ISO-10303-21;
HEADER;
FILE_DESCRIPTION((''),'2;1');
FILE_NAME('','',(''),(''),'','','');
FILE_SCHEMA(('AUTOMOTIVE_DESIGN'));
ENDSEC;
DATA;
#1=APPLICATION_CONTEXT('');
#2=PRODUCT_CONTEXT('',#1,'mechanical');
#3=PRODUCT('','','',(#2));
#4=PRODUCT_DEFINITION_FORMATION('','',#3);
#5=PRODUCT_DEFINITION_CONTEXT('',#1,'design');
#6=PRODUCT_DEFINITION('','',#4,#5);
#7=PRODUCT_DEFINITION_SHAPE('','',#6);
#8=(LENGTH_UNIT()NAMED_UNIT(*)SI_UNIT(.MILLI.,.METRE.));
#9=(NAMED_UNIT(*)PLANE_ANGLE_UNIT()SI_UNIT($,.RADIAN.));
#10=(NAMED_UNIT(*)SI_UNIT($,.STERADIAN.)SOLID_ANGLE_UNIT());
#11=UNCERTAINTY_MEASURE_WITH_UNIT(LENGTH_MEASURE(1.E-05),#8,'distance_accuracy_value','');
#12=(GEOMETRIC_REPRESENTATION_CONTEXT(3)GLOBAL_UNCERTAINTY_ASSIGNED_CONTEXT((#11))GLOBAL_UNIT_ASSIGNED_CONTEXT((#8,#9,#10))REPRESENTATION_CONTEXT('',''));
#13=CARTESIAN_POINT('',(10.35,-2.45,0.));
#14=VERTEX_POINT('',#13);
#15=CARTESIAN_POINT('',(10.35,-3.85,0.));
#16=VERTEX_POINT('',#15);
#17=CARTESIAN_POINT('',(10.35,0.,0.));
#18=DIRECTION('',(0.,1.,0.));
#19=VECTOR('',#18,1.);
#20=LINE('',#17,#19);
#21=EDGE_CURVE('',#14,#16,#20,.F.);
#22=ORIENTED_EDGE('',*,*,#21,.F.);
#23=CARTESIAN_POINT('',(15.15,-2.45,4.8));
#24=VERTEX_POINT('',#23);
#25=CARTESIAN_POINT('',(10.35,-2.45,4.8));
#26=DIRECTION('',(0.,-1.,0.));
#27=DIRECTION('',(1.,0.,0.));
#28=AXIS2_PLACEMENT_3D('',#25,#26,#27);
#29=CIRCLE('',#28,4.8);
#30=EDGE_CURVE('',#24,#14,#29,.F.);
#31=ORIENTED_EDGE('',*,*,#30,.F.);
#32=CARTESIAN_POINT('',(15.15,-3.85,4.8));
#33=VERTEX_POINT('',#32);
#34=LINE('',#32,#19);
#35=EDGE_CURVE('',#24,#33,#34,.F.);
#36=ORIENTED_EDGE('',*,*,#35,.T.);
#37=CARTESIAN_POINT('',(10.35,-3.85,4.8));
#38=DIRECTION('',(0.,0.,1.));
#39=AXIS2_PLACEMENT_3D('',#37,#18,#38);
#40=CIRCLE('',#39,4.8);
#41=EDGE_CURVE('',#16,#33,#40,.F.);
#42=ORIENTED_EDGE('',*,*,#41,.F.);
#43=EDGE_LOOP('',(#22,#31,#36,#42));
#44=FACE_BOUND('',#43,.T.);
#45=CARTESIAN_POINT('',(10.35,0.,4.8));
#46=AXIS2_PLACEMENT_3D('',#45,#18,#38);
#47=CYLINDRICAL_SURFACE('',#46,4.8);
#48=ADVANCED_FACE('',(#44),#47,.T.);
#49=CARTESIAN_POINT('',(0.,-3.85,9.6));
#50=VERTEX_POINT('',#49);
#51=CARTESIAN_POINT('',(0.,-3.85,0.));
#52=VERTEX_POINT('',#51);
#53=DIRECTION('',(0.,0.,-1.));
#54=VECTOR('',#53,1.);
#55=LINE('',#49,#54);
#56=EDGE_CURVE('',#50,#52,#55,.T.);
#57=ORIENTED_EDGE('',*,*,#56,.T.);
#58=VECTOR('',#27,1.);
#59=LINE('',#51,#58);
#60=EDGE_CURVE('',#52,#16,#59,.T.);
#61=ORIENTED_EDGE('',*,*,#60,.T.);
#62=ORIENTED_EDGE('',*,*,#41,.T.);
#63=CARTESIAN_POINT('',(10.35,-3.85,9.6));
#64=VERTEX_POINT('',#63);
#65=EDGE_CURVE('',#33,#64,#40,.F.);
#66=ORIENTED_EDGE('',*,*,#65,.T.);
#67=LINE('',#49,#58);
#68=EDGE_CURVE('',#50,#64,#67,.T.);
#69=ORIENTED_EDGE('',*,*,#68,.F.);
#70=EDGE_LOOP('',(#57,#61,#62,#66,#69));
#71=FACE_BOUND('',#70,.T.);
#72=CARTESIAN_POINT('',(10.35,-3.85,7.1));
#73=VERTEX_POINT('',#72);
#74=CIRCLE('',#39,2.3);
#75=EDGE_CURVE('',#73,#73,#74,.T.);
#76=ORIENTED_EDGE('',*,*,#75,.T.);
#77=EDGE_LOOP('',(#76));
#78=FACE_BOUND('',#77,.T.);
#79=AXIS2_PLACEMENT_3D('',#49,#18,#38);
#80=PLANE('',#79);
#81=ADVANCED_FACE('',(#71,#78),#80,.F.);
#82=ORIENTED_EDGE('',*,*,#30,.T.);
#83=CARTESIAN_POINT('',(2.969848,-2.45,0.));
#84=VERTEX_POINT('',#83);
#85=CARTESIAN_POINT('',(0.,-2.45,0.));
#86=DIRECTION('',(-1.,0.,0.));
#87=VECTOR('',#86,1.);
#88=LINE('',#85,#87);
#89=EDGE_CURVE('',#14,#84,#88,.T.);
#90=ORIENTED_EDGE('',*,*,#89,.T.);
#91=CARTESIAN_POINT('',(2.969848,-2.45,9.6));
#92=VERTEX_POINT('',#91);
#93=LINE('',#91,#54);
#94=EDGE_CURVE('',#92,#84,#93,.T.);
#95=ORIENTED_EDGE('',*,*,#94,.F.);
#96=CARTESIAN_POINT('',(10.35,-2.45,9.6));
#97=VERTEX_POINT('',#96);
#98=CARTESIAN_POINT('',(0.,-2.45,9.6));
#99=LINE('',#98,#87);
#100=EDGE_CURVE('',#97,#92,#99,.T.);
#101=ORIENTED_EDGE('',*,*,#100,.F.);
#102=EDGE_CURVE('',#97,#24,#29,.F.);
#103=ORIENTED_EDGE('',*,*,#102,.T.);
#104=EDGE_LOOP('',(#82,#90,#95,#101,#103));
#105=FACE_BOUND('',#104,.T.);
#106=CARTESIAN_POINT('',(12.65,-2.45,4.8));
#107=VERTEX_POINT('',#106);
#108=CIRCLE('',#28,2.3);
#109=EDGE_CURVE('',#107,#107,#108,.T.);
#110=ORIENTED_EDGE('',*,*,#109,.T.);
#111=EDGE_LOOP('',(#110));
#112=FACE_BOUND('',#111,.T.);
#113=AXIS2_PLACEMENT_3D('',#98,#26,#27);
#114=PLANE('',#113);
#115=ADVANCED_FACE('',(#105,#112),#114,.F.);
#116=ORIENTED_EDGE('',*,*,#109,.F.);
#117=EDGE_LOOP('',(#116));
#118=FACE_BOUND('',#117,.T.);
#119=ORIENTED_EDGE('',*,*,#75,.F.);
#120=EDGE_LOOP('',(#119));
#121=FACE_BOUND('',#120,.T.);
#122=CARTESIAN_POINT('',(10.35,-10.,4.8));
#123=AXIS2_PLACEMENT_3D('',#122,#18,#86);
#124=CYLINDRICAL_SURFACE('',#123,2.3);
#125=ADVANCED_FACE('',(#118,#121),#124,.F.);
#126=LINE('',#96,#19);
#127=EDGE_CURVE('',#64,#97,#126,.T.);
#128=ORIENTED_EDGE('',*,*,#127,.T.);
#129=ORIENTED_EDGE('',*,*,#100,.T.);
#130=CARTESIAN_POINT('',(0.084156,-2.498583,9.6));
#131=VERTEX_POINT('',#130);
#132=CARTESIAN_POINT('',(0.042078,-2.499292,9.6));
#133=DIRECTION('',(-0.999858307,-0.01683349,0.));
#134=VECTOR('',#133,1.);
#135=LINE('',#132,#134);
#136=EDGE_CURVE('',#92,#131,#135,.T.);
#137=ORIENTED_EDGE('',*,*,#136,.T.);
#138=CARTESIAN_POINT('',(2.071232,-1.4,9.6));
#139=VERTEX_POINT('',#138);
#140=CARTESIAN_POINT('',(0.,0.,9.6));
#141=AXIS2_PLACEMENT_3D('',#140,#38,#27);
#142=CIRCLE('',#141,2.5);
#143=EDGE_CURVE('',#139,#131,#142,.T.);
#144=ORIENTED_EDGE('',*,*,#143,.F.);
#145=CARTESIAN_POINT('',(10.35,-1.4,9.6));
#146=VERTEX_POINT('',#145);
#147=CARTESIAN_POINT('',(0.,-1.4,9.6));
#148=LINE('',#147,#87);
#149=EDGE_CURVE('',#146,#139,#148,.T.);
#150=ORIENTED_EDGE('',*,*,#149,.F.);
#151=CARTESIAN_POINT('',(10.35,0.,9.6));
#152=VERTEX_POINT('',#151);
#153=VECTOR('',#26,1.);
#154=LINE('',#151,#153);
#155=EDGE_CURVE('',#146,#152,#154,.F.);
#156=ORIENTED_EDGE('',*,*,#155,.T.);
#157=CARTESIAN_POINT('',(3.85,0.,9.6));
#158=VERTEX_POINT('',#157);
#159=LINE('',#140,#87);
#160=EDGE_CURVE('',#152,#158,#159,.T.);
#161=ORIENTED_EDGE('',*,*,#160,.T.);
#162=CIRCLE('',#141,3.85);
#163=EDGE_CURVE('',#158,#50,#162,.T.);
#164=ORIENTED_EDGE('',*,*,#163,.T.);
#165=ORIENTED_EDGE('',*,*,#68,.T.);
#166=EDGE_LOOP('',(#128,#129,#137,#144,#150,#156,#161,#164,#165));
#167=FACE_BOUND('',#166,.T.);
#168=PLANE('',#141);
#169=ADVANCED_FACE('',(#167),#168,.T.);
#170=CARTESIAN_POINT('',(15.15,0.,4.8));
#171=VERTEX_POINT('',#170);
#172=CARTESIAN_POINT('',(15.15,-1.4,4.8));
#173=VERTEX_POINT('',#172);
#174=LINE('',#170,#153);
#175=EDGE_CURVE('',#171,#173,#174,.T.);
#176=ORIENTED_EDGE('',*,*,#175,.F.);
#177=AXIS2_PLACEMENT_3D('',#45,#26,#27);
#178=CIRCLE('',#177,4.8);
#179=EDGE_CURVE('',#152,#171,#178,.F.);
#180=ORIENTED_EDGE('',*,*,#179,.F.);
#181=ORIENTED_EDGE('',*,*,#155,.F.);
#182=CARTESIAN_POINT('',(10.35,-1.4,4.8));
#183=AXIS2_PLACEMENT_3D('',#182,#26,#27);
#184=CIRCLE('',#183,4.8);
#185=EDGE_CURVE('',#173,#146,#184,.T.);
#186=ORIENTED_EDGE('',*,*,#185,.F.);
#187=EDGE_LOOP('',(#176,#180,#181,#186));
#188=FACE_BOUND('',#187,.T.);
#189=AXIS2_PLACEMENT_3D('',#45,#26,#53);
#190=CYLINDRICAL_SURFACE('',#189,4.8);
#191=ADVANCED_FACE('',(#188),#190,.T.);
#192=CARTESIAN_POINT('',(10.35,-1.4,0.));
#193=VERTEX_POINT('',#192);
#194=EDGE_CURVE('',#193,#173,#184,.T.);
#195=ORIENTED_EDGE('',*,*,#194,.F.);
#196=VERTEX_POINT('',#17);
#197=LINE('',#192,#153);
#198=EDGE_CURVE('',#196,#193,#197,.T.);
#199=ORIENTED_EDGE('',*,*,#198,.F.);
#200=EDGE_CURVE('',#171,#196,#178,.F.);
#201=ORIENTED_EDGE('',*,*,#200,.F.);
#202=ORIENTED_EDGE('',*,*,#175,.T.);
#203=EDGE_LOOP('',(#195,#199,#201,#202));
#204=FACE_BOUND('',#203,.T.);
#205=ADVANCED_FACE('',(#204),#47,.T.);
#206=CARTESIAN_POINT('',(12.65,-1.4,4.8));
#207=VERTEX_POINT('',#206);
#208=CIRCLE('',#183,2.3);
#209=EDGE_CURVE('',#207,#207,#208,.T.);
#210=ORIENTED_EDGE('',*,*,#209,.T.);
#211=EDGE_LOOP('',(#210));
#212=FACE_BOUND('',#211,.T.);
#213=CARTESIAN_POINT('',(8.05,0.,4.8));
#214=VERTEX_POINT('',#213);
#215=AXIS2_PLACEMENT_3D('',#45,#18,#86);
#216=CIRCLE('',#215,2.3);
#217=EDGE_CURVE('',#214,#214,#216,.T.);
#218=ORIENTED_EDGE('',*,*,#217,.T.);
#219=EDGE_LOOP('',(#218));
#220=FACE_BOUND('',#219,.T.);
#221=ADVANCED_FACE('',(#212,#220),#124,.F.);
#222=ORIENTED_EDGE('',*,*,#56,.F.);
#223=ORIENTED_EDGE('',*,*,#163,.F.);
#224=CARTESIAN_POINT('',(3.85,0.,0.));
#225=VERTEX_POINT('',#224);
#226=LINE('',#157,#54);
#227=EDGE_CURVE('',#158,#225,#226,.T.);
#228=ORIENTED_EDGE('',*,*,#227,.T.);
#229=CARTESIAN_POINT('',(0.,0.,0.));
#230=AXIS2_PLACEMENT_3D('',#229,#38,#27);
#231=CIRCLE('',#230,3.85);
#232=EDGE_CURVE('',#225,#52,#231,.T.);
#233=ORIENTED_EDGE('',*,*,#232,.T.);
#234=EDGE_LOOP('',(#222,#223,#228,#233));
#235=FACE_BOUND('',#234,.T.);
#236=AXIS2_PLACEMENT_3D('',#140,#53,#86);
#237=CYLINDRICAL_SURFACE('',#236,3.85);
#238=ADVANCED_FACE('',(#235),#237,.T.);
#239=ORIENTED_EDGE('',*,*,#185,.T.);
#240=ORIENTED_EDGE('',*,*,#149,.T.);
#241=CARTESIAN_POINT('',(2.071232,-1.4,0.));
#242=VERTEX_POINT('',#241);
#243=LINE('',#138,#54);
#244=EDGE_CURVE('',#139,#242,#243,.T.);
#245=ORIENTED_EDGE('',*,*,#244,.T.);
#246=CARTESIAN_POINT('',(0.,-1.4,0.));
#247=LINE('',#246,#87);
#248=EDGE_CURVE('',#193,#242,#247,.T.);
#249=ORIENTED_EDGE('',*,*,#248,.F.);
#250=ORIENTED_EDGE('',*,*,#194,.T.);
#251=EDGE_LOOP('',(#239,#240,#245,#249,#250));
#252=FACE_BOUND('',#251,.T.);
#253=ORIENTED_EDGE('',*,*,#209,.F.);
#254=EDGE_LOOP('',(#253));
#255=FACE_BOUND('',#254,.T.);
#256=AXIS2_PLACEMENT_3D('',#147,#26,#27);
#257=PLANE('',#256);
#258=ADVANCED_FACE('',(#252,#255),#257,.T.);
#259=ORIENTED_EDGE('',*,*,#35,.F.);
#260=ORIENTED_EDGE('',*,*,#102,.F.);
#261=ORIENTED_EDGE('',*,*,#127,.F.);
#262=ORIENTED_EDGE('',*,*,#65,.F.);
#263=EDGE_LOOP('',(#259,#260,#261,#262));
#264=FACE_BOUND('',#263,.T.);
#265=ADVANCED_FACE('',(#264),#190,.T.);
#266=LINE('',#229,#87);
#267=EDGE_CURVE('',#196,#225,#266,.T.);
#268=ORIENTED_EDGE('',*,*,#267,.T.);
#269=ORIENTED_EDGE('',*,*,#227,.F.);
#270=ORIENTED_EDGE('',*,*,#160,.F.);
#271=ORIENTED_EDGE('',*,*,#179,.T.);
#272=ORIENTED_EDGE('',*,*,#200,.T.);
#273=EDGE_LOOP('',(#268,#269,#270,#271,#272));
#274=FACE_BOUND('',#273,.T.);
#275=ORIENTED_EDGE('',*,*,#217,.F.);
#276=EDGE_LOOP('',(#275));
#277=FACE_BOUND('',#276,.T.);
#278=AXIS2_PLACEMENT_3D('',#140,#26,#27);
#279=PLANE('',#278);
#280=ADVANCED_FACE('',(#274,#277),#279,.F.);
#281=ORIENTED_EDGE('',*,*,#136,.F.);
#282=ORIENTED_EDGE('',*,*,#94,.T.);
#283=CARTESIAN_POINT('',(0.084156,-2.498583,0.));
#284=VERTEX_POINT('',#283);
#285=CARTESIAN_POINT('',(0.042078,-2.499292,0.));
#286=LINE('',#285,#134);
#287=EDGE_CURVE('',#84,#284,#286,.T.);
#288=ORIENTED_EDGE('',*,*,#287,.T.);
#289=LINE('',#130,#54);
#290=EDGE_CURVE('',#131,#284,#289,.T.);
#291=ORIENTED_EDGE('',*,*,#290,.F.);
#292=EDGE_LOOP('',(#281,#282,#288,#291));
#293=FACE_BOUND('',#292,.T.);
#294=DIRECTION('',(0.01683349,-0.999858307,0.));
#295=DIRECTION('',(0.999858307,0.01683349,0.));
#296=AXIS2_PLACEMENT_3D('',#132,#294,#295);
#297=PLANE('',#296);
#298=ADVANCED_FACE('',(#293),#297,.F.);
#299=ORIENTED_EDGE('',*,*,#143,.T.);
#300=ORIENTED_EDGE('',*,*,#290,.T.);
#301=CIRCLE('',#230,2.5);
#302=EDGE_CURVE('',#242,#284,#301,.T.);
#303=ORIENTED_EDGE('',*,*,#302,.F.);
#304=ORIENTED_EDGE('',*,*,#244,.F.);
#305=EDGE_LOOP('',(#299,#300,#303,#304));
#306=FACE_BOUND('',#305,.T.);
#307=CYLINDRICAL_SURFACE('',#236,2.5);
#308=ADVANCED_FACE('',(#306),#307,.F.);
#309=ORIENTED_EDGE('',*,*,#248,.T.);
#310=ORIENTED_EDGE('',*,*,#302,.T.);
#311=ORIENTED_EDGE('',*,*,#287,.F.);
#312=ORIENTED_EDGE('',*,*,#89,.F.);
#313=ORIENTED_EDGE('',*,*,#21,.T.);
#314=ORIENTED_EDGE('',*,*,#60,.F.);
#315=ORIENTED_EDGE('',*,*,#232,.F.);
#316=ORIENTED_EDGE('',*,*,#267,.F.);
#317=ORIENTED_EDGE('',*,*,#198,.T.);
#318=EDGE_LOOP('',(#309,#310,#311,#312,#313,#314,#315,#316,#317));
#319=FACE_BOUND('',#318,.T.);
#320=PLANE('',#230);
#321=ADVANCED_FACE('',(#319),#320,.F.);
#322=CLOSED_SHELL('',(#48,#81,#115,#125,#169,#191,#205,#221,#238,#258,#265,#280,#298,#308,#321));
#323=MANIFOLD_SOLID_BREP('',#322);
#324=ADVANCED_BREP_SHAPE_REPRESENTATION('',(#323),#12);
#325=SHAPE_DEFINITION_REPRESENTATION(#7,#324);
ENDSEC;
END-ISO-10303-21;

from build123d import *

# Parameters (mm, degrees)
BOSS_EXTRUDE1_DEPTH = 9.6
FILLET1_R           = 4.8
SKETCH2_R           = 2.3
CUT_EXTRUDE1_DEPTH  = 10


with BuildPart() as part:
    # Sketch1 → Boss-Extrude1 (new body)
    with BuildSketch(Plane.XY):
        with BuildLine():
            ThreePointArc((3.85, 0), (-2.722361108, 2.722361108), (0, -3.85))
            Line((0, -3.85), (15.15, -3.85))
            Line((15.15, -3.85), (15.15, -2.45))
            Line((15.15, -2.45), (2.969848481, -2.45))
            Line((2.969848481, -2.45), (0.084155525, -2.498583168))
            ThreePointArc((0.084155525, -2.498583168), (0.042083726, -2.499645767), (0, -2.5))
            ThreePointArc((0, -2.5), (-1.767766953, 1.767766953), (2.5, 0))
            ThreePointArc((2.5, 0), (2.390405697, -0.732093302), (2.071231518, -1.4))
            Line((2.071231518, -1.4), (15.15, -1.4))
            Line((15.15, -1.4), (15.15, 0))
            Line((15.15, 0), (3.85, 0))
        make_face()
    extrude(amount=BOSS_EXTRUDE1_DEPTH)

    # Fillet1
    fillet1_edges = [part.edges().sort_by_distance(p)[0] for p in [
        (15.15, -0.7, 0),
        (15.15, -0.7, 9.6),
        (15.15, -3.15, 0),
        (15.15, -3.15, 9.6),
    ]]
    fillet(fillet1_edges, radius=FILLET1_R - 0.0001)  # a hair under: the kernel refuses the full size

    # Sketch2 → Cut-Extrude1 (cut)
    with BuildSketch(Plane(origin=(0, 0, 0), x_dir=(1, 0, 0), z_dir=(0, 1, 0))):
        with Locations(Location((10.35, -4.8, 0), (0, 0, 180))):
            Circle(SKETCH2_R)
    extrude(amount=-CUT_EXTRUDE1_DEPTH, mode=Mode.SUBTRACT)


solid = part.part
